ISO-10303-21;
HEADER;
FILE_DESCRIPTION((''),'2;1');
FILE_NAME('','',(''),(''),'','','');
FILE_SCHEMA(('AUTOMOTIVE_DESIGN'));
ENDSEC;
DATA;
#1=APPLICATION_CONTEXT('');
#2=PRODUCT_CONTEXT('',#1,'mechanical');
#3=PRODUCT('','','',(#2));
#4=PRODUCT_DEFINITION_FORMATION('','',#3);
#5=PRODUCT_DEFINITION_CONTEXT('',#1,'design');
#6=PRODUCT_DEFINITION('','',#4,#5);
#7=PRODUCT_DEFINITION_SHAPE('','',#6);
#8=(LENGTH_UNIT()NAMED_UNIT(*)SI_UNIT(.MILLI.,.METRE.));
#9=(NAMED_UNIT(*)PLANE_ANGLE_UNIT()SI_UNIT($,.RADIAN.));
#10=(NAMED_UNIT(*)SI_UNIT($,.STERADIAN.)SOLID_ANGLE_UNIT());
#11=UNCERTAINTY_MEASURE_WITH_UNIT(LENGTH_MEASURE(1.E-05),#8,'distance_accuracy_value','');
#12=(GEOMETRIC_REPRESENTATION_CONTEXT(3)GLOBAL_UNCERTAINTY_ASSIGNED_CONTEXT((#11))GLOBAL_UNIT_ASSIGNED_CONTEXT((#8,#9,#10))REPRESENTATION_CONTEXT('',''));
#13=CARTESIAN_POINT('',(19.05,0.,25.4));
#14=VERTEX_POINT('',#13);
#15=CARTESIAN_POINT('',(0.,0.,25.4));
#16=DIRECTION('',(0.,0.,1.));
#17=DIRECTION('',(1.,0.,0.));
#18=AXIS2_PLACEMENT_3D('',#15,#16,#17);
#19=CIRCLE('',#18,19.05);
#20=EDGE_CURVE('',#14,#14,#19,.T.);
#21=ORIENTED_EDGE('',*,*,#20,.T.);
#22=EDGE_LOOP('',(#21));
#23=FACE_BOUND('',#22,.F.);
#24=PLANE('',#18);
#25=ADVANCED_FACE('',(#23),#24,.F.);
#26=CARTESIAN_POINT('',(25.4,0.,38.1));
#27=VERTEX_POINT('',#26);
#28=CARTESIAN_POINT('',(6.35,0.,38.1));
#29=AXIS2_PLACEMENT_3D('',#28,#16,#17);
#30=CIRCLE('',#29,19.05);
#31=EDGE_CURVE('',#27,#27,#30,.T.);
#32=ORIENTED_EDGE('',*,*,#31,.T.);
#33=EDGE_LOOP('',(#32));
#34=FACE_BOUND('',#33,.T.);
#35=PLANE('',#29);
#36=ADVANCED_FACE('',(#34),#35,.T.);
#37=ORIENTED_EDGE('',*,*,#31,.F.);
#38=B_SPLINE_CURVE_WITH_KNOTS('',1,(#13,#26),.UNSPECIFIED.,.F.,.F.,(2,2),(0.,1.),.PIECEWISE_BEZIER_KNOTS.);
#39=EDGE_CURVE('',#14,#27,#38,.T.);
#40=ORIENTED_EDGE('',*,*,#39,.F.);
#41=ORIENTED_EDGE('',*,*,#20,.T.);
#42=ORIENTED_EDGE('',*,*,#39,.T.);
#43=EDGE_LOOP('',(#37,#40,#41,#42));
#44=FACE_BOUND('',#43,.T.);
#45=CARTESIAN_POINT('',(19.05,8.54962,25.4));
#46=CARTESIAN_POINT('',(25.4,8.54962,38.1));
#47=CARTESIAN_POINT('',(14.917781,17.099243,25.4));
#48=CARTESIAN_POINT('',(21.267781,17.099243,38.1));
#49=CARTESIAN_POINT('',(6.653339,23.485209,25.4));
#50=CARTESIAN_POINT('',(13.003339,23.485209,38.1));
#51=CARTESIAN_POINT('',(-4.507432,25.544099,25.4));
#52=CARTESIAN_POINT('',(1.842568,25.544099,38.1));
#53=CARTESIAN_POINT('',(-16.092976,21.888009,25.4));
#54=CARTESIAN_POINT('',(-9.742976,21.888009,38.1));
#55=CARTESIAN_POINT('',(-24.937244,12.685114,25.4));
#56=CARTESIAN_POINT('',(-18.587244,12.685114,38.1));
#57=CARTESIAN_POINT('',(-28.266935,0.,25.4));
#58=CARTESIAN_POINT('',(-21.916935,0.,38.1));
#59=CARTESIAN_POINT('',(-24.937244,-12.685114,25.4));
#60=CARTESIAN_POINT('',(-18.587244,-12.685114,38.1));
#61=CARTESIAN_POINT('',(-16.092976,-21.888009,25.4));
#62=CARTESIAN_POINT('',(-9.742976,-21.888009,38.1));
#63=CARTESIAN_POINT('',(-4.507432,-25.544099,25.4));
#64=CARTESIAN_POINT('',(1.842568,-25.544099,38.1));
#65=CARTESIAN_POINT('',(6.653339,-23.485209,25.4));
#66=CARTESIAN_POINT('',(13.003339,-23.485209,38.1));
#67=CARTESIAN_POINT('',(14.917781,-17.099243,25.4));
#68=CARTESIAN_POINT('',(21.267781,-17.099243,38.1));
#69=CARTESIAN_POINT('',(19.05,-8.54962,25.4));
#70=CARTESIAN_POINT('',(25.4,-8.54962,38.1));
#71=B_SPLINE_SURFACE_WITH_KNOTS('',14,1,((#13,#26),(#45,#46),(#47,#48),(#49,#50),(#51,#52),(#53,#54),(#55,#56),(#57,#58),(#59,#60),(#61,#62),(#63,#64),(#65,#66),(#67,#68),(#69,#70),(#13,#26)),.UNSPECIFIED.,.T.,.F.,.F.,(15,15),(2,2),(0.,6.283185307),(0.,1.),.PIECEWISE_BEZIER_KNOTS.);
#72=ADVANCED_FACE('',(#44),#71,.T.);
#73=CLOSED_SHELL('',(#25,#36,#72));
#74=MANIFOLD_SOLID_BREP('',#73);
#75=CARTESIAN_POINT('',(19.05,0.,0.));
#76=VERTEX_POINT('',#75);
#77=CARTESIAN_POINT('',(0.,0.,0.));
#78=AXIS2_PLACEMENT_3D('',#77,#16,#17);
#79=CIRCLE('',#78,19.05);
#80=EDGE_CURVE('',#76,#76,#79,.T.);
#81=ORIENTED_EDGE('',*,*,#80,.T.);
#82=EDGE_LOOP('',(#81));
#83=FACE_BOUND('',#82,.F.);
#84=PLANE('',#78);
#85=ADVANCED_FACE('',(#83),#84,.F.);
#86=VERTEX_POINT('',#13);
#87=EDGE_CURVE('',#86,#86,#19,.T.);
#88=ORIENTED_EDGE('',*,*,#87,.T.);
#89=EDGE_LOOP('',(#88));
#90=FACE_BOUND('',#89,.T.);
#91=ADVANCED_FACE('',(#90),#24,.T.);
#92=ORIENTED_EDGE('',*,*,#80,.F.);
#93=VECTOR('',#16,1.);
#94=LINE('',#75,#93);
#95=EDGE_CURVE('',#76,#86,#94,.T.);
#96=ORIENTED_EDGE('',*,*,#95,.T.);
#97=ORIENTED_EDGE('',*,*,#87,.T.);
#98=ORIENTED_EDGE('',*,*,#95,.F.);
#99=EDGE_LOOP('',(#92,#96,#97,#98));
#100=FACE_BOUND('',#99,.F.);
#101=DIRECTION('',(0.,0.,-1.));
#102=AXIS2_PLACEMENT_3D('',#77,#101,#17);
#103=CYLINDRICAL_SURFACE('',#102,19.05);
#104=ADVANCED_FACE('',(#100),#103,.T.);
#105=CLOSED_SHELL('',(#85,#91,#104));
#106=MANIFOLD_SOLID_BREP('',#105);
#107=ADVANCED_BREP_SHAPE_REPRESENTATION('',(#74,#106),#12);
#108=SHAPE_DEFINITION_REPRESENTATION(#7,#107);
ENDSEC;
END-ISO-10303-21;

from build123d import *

# Parameters (mm, degrees)
F0_R     = 19.05
F1_DEPTH = 25.4
F4_R     = 19.05
F3_R     = 19.05


with BuildPart() as f1:
    # F0 (on Top) → F1 (new body)
    with BuildSketch(Plane.XY):
        Circle(F0_R)
    extrude(amount=F1_DEPTH)


with BuildPart() as f7:
    # F4 (on face) → F7 section 0
    with BuildSketch(Plane.XY.offset(25.4)):
        Circle(F4_R)
    # F3 (on offset) → F7 section 1
    with BuildSketch(Plane.XY.offset(38.1)):
        with Locations((6.35, 0)):
            Circle(F3_R)
    loft()


solid = Compound([f1.part, f7.part])
